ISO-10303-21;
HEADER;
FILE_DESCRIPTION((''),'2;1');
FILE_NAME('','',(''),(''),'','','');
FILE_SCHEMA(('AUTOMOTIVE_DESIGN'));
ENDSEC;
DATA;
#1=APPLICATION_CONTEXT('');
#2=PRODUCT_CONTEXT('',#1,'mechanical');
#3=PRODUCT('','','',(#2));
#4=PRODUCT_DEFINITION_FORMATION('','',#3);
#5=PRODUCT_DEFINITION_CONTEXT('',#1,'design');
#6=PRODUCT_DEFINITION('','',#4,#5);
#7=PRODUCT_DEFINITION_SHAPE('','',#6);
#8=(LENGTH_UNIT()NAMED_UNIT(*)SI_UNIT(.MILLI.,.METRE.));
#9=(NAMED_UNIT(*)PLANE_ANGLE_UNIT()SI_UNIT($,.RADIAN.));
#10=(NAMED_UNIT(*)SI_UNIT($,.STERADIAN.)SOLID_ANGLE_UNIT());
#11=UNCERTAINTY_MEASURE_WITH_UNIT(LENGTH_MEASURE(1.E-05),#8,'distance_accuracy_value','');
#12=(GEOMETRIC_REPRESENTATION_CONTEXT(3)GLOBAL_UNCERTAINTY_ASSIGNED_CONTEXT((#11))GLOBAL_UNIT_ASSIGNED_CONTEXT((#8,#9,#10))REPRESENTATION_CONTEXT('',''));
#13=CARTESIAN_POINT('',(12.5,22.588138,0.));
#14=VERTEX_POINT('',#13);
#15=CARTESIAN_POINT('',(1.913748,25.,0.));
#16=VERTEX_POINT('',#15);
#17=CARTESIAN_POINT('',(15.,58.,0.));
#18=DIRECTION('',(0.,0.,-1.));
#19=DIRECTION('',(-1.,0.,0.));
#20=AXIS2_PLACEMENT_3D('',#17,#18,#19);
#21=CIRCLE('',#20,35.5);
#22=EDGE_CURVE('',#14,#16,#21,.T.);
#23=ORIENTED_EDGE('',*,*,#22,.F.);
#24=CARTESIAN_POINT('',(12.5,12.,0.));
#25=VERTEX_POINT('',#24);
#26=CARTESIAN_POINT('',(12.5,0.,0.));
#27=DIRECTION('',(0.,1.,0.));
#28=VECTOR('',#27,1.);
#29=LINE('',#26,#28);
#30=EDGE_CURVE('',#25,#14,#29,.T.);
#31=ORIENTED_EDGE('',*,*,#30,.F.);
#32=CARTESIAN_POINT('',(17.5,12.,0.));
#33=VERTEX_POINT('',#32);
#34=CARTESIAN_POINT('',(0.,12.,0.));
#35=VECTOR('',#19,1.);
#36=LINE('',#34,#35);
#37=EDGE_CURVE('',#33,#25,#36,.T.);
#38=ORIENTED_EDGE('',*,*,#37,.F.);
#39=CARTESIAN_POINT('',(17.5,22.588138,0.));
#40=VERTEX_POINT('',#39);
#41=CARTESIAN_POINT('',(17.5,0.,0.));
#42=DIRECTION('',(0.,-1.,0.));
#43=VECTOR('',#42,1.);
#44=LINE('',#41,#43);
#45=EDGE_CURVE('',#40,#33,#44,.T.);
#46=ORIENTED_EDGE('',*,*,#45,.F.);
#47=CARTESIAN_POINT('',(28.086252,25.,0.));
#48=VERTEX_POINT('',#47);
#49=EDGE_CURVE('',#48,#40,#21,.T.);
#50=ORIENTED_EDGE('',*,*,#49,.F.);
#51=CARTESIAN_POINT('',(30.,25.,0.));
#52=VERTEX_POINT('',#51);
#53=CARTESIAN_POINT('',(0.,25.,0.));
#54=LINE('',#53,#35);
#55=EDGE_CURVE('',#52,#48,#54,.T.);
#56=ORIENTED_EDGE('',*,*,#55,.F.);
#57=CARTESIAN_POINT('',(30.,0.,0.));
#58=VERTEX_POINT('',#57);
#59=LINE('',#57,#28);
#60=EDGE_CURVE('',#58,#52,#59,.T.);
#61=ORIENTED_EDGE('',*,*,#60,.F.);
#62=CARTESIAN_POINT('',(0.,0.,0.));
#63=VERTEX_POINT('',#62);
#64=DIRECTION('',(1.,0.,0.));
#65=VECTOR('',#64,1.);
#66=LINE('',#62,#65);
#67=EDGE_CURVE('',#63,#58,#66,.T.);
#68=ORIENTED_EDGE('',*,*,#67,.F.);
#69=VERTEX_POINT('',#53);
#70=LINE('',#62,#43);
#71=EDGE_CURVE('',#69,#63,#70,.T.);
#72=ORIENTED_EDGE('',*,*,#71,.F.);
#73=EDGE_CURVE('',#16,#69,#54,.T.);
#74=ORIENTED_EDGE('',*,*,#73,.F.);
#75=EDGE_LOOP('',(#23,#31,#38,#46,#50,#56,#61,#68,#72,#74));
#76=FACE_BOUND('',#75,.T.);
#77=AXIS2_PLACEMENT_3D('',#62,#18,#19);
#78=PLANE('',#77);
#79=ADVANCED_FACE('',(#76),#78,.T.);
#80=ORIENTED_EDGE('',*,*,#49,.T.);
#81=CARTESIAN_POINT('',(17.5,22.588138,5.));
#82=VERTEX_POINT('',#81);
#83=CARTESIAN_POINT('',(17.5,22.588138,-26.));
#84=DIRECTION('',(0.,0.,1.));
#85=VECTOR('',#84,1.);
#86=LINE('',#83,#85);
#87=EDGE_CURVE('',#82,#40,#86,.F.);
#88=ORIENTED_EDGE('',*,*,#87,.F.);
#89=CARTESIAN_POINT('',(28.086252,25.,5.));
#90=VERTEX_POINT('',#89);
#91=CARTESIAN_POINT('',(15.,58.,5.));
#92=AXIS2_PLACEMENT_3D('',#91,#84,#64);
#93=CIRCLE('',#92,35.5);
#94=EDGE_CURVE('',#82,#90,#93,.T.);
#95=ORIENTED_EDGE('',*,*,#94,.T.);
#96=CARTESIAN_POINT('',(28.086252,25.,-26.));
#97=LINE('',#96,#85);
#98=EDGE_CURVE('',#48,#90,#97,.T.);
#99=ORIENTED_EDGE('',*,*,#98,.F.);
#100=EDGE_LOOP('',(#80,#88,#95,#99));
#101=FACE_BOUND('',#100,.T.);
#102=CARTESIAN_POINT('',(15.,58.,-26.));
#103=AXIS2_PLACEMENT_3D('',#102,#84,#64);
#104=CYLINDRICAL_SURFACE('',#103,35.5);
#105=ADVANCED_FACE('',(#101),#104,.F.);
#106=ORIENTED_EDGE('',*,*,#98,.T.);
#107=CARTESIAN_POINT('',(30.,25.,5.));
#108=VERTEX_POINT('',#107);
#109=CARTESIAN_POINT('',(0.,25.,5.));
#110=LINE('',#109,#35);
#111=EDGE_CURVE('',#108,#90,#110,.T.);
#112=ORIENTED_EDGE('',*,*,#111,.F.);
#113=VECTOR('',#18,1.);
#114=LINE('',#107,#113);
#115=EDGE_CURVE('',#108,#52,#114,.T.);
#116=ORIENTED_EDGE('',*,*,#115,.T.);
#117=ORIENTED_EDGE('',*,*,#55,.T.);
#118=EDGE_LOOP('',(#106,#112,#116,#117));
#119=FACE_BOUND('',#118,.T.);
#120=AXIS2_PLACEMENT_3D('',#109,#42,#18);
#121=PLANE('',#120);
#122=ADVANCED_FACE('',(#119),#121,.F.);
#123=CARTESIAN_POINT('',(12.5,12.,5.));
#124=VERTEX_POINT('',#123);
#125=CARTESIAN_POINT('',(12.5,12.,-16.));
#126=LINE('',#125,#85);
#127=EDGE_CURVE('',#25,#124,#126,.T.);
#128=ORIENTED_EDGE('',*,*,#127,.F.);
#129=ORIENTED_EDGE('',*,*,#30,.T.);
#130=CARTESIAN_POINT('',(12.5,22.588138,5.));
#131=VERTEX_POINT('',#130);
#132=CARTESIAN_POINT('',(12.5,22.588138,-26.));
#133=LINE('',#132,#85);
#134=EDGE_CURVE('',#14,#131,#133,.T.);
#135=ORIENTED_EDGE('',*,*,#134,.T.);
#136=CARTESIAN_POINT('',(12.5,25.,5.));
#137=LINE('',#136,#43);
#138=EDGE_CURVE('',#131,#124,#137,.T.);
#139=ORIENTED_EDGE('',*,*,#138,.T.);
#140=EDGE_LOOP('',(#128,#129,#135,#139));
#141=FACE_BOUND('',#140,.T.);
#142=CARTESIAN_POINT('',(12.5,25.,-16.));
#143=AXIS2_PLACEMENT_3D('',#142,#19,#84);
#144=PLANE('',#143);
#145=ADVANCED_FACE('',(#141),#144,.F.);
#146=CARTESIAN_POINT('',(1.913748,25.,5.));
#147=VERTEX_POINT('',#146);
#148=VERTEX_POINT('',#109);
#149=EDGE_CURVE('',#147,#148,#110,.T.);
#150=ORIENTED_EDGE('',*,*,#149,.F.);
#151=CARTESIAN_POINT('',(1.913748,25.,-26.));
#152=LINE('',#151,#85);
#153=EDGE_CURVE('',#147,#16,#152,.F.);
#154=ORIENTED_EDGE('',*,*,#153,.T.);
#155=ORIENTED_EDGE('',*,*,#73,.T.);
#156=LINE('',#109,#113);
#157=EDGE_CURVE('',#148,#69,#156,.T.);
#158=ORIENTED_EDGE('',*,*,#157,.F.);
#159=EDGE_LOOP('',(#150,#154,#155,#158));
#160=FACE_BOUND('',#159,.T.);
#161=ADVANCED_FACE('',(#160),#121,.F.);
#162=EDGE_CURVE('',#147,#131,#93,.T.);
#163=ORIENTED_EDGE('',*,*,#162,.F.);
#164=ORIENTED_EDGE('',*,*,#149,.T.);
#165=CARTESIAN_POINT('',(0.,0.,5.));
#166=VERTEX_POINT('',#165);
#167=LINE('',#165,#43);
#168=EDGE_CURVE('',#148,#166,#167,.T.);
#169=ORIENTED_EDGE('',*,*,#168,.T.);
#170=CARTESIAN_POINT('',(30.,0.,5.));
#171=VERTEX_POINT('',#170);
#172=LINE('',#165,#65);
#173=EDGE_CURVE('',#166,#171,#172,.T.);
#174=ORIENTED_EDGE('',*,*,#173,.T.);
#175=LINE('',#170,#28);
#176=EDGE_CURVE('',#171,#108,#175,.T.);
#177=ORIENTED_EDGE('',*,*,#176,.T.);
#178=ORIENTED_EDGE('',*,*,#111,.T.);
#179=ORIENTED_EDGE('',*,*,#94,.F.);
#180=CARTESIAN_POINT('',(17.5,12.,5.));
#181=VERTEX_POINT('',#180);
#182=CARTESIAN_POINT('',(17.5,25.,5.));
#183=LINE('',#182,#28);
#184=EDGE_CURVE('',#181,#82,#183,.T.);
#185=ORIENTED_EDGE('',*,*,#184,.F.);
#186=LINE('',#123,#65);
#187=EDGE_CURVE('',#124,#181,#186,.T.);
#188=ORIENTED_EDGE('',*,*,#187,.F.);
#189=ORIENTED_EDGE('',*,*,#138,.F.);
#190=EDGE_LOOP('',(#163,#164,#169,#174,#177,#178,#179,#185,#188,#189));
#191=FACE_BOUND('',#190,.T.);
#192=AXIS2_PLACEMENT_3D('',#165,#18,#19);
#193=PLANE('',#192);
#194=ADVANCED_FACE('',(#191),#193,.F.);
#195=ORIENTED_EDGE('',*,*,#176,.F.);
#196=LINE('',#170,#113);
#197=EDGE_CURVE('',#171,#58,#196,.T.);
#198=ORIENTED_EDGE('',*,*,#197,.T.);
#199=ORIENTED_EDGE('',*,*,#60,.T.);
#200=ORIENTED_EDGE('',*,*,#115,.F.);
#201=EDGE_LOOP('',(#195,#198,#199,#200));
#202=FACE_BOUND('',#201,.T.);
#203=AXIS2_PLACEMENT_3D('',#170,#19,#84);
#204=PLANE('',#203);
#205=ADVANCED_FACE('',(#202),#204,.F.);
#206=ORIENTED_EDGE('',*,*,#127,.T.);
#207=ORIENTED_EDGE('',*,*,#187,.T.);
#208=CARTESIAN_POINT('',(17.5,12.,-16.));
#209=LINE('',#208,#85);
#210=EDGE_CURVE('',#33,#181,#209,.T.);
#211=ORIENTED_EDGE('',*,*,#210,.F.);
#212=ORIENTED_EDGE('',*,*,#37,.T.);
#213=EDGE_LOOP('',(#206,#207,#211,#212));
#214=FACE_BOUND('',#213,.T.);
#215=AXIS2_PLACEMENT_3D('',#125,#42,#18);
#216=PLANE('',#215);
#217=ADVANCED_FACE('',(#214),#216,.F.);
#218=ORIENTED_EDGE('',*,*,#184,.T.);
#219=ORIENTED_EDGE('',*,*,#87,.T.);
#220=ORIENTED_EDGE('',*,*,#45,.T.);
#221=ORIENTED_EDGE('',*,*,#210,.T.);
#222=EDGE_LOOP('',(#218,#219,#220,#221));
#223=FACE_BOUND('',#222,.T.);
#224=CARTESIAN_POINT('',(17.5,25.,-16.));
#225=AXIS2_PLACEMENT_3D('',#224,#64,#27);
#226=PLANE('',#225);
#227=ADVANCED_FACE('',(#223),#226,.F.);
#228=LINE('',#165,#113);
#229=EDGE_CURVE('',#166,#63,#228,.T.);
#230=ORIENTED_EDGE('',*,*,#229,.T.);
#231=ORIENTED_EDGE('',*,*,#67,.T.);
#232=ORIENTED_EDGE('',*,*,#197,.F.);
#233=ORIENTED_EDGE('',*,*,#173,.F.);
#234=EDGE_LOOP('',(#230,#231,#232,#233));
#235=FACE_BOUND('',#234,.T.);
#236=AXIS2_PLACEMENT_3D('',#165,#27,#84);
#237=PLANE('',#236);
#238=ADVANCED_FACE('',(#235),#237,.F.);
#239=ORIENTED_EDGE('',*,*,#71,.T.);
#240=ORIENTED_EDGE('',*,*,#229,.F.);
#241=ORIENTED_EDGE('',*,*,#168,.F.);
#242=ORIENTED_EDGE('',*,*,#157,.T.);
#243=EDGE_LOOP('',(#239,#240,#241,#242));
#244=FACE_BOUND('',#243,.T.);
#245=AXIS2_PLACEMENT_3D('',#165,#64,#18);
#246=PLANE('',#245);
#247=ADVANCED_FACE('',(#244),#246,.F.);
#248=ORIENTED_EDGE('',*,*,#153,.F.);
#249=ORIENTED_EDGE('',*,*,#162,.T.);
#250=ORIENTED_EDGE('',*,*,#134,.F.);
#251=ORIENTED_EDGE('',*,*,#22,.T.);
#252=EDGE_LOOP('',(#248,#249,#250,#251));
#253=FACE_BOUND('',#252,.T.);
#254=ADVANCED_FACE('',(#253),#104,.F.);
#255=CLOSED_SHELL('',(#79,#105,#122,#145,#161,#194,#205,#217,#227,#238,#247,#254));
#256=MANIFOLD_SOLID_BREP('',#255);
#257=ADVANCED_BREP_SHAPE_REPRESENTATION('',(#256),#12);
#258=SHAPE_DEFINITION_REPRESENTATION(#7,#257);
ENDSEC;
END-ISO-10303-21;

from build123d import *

# Parameters (mm, degrees)
SKETCH1_W               = 30
SKETCH1_H               = 25
BOSS_EXTRUDE1_DEPTH     = 5
BOSS_EXTRUDE6_START     = -5
BOSS_EXTRUDE6_OUTLINE_W = 5
BOSS_EXTRUDE6_OUTLINE_H = 13
BOSS_EXTRUDE6_DEPTH     = 5
SKETCH5_R               = 35.5
CUT_EXTRUDE1_DEPTH      = 31


# Read off the part's stored shape, not the designer's step: Boss-Extrude6
with BuildPart() as part:
    # Sketch1 → Boss-Extrude1 (new body)
    with BuildSketch(Plane.XY):
        with Locations((15, 12.5)):
            Rectangle(SKETCH1_W, SKETCH1_H)
    extrude(amount=BOSS_EXTRUDE1_DEPTH)

    # Boss-Extrude6 outline → Boss-Extrude6 (cut)
    with BuildSketch(Plane.XY.offset(5).offset(BOSS_EXTRUDE6_START)):
        with Locations((15, 18.5)):
            Rectangle(BOSS_EXTRUDE6_OUTLINE_W, BOSS_EXTRUDE6_OUTLINE_H)
    extrude(amount=BOSS_EXTRUDE6_DEPTH, mode=Mode.SUBTRACT)

    # Sketch5 → Cut-Extrude1 (cut)
    with BuildSketch(Plane.XY.offset(5)):
        with Locations((15, 58)):
            Circle(SKETCH5_R)
    extrude(amount=-CUT_EXTRUDE1_DEPTH, mode=Mode.SUBTRACT)


solid = part.part
